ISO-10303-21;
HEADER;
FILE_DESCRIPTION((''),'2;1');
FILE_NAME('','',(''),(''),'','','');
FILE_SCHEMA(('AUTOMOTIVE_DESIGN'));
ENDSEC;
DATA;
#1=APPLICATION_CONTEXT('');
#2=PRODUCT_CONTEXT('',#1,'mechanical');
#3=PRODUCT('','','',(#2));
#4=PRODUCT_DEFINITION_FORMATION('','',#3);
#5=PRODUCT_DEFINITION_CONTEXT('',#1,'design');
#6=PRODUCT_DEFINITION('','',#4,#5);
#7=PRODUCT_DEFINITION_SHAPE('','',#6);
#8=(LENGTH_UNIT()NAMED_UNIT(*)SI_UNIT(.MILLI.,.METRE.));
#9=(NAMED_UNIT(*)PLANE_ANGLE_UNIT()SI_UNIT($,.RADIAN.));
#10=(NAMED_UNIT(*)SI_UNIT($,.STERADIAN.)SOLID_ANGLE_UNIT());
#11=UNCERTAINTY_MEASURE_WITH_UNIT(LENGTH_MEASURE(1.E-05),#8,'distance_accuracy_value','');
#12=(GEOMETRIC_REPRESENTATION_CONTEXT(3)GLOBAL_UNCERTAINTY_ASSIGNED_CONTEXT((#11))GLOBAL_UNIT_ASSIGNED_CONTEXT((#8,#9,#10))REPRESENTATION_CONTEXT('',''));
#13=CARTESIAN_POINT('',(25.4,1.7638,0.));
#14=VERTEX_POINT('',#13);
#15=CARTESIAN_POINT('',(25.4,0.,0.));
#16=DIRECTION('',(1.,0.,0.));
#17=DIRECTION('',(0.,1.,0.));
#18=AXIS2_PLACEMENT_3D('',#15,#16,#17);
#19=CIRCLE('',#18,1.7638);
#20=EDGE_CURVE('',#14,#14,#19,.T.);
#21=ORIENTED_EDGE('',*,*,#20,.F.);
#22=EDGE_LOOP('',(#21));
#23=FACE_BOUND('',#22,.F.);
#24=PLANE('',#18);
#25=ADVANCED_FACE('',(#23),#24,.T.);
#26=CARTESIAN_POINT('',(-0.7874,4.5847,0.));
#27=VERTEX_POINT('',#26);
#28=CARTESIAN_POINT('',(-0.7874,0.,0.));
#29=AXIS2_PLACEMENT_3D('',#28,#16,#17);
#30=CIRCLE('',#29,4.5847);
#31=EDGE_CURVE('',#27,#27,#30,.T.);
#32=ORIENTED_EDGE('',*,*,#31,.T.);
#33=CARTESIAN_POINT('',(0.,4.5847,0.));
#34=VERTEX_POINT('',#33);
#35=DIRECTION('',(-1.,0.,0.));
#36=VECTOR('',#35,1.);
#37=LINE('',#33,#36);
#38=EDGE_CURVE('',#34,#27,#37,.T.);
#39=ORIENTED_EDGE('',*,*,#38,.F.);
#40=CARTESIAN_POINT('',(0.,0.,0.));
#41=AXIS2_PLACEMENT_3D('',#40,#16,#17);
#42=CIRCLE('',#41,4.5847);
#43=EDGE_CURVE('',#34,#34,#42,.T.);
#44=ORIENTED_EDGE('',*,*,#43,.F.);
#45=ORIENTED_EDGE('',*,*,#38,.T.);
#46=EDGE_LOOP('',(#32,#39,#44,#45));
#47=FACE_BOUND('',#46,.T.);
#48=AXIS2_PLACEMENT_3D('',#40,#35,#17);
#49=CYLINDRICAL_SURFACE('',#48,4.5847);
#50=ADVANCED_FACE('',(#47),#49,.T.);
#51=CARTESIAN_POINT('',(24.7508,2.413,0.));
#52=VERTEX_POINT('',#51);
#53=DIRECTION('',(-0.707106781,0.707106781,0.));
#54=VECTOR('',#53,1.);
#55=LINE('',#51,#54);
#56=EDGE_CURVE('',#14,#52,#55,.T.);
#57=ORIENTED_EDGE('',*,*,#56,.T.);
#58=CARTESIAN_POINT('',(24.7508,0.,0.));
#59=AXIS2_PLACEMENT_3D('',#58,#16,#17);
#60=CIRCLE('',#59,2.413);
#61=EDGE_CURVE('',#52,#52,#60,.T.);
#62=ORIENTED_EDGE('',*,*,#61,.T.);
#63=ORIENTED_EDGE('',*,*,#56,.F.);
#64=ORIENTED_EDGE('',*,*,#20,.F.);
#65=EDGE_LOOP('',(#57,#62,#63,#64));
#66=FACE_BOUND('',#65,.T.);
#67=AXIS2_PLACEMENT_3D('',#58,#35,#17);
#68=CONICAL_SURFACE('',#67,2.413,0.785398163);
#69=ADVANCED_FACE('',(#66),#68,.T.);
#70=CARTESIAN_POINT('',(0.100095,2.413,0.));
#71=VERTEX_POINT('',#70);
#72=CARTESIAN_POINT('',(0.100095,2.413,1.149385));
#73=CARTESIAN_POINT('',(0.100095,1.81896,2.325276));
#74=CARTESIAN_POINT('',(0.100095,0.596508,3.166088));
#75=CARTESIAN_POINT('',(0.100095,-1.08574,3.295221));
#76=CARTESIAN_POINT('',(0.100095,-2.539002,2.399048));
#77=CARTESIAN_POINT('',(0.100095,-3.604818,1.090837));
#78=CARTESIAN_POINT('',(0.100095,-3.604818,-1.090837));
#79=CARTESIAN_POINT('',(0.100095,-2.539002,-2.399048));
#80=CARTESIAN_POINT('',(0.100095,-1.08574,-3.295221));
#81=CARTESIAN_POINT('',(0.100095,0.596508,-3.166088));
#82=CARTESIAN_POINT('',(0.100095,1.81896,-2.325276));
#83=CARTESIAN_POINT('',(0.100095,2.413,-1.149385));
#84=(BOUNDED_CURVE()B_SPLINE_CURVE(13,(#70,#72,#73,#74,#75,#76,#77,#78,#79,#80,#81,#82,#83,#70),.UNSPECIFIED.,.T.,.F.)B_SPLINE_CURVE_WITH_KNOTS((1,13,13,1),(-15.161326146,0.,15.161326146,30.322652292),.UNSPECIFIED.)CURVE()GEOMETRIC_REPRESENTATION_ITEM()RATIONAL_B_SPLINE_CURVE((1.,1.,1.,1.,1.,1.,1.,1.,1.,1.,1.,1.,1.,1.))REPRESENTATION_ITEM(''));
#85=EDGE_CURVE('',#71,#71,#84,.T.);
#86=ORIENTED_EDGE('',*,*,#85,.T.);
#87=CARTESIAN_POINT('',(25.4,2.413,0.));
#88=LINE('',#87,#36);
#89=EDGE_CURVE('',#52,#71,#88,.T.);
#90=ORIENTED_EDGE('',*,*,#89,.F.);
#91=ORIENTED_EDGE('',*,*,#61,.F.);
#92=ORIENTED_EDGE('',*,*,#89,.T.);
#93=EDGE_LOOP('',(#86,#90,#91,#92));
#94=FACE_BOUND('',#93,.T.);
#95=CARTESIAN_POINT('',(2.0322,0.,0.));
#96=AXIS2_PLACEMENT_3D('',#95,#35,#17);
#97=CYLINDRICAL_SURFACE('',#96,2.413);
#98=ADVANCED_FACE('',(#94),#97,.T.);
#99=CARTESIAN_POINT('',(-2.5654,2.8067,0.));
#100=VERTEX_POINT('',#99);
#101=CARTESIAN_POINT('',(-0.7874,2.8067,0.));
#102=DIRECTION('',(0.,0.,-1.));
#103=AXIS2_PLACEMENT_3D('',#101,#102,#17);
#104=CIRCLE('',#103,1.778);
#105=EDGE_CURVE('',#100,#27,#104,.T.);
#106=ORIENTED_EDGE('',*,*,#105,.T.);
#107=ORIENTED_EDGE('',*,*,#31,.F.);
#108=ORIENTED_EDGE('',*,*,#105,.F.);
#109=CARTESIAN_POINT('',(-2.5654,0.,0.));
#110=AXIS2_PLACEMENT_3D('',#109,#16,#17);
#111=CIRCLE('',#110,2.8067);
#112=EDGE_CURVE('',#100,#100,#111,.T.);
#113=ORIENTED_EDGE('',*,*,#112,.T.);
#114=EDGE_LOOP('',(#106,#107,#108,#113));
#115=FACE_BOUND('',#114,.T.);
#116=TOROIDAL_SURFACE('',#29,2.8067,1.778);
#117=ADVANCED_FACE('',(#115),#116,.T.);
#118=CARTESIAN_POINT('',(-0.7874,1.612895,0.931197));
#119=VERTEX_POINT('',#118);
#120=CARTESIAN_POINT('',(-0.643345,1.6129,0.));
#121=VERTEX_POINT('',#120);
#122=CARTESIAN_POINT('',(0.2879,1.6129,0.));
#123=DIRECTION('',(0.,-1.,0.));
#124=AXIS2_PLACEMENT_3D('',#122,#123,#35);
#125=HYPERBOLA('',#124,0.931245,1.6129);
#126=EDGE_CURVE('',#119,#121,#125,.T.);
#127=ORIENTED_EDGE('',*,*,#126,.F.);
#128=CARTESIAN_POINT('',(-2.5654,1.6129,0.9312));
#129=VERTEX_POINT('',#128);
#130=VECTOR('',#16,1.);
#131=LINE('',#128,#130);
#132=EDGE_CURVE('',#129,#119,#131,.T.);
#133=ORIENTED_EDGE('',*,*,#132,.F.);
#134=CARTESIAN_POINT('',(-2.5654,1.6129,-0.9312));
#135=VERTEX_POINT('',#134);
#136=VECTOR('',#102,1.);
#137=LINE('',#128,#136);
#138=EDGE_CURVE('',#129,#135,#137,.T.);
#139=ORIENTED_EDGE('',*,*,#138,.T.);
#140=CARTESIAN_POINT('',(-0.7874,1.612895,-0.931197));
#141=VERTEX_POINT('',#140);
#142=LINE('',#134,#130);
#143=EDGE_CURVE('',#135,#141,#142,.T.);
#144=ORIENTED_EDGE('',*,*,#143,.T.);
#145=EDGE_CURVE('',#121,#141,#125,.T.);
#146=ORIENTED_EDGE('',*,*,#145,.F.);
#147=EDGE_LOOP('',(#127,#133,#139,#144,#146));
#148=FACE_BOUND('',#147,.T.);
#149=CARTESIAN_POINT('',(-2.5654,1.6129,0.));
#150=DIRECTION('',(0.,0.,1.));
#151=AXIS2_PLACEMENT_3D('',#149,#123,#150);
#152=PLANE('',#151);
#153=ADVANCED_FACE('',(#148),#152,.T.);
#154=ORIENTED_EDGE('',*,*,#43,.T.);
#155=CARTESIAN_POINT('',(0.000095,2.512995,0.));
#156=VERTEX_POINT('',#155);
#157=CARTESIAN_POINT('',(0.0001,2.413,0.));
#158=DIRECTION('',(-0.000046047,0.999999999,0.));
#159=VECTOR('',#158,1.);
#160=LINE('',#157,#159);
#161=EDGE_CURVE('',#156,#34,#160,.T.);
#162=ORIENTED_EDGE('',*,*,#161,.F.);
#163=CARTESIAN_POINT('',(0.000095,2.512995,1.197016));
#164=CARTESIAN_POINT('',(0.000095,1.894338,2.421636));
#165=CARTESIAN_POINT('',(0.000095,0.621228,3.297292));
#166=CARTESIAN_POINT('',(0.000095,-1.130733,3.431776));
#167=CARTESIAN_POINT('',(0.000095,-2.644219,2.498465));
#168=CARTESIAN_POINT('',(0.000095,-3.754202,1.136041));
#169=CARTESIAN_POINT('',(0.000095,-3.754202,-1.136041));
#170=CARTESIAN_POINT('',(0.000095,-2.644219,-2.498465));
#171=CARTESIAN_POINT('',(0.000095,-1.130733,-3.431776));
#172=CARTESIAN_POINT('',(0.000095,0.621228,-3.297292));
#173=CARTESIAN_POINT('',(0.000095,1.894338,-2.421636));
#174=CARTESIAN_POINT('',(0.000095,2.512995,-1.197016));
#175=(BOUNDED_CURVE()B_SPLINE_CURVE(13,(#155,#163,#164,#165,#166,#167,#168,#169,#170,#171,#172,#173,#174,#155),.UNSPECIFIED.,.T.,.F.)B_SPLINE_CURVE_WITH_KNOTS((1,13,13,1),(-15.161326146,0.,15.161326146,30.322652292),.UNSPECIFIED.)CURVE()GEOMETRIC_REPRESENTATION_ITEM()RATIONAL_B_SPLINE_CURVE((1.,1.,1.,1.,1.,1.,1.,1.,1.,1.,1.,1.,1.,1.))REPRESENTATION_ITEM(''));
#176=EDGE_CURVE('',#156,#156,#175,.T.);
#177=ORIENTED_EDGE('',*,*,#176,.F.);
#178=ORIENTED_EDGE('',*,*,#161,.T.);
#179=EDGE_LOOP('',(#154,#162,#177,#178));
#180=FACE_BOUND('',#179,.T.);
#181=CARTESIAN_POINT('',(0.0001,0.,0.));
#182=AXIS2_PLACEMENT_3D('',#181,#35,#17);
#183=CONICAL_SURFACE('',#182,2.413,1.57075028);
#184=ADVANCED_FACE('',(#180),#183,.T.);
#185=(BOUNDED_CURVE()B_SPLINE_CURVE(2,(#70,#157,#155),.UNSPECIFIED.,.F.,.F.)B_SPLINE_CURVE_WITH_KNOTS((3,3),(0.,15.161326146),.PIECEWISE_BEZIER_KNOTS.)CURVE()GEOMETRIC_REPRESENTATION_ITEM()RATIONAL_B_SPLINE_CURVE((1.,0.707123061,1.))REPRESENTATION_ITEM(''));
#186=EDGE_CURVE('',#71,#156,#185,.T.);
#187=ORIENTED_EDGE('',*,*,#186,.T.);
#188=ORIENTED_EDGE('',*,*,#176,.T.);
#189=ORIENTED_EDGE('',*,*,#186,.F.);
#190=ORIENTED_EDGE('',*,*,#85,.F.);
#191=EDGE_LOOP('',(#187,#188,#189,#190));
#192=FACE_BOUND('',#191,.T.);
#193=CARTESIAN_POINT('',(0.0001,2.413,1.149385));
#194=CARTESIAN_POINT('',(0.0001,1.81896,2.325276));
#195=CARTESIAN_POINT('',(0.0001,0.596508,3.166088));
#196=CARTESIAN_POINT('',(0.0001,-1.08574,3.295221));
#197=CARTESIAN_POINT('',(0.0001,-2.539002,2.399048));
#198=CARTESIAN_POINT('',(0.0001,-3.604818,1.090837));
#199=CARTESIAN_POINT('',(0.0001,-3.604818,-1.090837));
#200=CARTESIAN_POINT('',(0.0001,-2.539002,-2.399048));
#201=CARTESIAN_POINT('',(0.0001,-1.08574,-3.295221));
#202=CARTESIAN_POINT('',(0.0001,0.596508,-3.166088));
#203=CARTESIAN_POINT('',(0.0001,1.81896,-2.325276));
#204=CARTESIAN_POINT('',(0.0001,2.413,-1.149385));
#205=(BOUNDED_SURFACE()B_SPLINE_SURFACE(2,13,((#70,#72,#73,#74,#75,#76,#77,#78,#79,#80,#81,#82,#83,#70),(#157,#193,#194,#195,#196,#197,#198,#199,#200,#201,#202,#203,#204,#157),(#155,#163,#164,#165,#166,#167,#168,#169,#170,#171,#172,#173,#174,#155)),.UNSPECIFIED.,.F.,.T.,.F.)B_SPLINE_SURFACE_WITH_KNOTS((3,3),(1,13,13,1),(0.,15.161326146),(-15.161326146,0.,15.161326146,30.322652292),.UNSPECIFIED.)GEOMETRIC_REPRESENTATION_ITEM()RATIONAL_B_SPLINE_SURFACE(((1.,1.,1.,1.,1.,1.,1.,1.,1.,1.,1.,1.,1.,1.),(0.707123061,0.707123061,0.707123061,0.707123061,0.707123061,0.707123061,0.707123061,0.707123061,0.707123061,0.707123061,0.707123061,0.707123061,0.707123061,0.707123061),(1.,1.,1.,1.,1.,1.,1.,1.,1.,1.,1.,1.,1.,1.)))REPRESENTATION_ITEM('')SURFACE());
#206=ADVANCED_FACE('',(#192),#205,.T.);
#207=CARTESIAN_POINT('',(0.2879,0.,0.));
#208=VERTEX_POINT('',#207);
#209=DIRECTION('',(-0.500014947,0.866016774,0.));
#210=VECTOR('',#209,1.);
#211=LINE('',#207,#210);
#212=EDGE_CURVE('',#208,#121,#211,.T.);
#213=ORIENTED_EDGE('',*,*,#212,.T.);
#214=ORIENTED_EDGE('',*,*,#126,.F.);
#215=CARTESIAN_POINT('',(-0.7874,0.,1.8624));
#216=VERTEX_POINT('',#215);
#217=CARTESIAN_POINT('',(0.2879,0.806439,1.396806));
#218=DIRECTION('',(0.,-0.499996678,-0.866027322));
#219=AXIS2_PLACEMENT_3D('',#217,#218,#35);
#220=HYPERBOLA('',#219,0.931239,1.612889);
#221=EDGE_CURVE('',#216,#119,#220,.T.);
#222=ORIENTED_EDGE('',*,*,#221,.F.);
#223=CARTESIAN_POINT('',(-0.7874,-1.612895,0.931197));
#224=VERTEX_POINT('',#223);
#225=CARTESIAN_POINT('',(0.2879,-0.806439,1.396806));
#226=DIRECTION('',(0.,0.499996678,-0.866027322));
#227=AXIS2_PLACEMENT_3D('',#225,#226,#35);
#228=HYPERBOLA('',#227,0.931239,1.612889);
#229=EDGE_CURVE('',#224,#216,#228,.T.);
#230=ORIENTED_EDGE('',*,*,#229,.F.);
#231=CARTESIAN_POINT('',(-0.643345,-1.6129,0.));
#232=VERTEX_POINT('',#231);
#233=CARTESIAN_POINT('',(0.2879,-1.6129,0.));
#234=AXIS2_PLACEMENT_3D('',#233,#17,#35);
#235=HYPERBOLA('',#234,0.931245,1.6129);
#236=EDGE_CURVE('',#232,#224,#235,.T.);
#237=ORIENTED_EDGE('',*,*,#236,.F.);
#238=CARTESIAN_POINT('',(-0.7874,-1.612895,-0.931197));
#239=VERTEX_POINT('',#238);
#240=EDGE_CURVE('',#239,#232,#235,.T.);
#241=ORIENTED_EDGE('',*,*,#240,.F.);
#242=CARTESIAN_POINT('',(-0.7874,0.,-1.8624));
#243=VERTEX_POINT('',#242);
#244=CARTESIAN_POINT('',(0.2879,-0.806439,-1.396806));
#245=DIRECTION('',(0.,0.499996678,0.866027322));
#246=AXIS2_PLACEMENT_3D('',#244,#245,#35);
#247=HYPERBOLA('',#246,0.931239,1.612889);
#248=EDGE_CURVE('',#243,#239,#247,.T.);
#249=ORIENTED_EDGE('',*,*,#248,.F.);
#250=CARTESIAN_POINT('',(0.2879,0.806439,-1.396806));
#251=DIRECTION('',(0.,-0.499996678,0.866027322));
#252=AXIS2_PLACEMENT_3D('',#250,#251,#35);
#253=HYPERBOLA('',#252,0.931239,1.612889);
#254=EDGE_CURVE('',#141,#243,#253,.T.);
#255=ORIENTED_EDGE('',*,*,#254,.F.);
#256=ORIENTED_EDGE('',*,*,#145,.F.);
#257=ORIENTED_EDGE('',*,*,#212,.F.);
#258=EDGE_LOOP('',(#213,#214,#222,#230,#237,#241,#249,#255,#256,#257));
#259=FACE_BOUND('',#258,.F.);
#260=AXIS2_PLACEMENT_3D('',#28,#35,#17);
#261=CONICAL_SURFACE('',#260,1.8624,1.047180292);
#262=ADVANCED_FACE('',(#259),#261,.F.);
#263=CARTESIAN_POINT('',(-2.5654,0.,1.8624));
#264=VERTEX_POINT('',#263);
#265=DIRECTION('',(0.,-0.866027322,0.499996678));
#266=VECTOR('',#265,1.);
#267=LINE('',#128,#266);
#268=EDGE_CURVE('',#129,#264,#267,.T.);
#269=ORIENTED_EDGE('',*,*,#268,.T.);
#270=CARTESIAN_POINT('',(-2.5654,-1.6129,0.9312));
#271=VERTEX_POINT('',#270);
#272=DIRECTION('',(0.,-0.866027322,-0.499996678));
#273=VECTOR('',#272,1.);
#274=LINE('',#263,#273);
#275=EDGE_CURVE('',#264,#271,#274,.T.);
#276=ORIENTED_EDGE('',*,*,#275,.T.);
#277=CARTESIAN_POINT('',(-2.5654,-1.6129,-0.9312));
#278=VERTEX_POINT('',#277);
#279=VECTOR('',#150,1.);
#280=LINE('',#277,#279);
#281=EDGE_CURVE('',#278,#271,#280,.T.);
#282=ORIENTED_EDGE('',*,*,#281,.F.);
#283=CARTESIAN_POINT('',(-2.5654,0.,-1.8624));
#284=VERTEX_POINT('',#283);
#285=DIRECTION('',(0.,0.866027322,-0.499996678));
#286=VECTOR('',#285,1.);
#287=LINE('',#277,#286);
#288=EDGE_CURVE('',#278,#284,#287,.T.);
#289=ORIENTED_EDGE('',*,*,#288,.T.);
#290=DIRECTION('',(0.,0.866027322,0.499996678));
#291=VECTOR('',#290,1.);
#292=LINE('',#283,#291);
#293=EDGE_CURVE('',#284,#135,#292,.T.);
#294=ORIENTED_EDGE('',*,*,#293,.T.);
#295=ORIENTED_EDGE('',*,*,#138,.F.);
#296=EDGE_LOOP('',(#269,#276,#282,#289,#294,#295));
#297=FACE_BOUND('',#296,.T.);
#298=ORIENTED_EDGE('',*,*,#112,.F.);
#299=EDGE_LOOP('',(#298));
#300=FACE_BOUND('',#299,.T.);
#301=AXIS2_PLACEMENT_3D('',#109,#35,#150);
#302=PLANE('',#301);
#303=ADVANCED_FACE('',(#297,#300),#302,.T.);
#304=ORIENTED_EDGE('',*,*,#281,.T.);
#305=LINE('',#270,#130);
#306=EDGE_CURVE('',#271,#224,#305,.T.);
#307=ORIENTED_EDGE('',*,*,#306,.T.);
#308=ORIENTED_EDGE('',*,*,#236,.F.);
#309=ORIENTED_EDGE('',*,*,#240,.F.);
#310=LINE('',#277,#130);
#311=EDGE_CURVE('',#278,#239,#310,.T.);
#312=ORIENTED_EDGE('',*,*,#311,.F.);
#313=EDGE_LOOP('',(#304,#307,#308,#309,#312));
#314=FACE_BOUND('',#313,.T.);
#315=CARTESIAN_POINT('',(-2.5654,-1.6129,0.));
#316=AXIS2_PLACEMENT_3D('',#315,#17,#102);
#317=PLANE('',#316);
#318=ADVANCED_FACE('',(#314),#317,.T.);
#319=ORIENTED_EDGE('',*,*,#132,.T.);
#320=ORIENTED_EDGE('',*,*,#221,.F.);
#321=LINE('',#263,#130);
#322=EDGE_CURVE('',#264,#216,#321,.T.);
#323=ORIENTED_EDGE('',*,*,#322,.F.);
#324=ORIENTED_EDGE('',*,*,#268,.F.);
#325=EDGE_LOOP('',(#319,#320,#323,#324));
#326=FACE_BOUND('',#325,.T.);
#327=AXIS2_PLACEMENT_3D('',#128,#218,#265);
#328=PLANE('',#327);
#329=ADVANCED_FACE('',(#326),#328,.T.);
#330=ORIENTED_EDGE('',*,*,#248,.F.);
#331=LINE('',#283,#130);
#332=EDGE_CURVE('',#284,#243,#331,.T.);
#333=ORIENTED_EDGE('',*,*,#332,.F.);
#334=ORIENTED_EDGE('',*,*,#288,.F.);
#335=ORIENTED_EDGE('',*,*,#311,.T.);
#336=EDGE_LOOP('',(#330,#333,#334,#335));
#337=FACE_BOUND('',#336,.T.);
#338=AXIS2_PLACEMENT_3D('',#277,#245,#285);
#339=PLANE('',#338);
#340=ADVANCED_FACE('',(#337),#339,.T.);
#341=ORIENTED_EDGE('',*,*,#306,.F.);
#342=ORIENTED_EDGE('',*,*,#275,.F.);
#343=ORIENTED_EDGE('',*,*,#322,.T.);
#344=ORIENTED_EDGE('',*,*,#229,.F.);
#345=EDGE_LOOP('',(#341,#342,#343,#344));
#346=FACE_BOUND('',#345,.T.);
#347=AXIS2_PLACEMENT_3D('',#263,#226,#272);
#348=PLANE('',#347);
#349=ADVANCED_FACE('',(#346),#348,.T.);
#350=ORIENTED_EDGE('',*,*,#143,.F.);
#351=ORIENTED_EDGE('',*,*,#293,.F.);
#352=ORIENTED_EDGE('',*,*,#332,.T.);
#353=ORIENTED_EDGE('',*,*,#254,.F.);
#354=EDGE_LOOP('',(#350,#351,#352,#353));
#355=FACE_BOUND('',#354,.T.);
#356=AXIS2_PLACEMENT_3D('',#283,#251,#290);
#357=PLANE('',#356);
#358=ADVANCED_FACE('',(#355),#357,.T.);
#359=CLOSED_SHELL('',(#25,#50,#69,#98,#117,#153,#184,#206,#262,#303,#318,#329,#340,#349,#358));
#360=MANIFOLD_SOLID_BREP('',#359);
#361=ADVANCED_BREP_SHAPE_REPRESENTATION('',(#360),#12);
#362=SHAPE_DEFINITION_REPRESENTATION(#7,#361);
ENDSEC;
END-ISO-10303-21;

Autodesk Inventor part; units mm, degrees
ref_plane "YZ Plane" through (0, 0, 0) normal (1, 0, 0) x (0, 1, 0)
ref_plane "XZ Plane" through (0, 0, 0) normal (0, 1, 0) x (-1, 0, 0)
sketch "Sketch1" plane through (0, 0, 0) normal (0, 0, 1) x (1, 0, 0)
  line L0 (0.2879, 0) -> (25.4, 0)
  line L1 (25.4, 0) -> (25.4, 2.413)
  line L2 (25.4, 2.413) -> (2.0322, 2.413)
  line L3 (2.0322, 2.413) -> (0.0001, 2.413)
  line L4 (0.0001, 2.413) -> (0, 2.413)
  line L5 (0, 2.413) -> (0, 4.5847)
  line L6 (0, 4.5847) -> (-2.5654, 4.5847)
  line L7 (-2.5654, 4.5847) -> (-2.5654, 1.8624)
  line L8 (-2.5654, 1.8624) -> (-0.7874, 1.8624)
  line L9 (-0.7874, 1.8624) -> (0.2879, 0)
  line L10 (-8.1585, 0) -> (30.9931, 0) projected
  line L11 (0, -0.9169) -> (0, 5.5016) projected
  line L12 (2.0322, 2.413) -> (0, 2.413) construction
  dimension "d1" = 23.3678
  dimension "d2" = 2.0321
  dimension "d3" = 2.5654
  dimension "d4" = 1.778
  dimension "d5" = 60
  dimension "d6" = 4.826
  dimension "d7" = 4.826
  dimension "d8" = 3.7248
  dimension "d9" = 9.1694
  dimension "d26" = 25.4
revolve "Body" add sketch "Sketch1" angle 360 about axis through (0.2879, 0, 0) along (1, 0, 0) contours L9 L11 L3 L2 L1 L0 | L9 L8 L7 L6 L5 L11
sketch "Sketch2" plane through (-2.5654, 0, 0) normal (-1, 0, 0) x (0, 0, 1)
  circle A0 centre (0, 0) radius 1.8624 projected
  line L0 (0, -6.4186) -> (0, 6.4186) projected
  line L1 (-6.4186, 0) -> (6.4186, 0) projected
  line L2 (1.8624, 0) -> (0.9312, -1.6129)
  line L3 (0.9312, -1.6129) -> (-0.9312, -1.6129)
  line L4 (-0.9312, -1.6129) -> (-1.8624, 0)
  line L5 (-1.8624, 0) -> (-0.9312, 1.6129)
  line L6 (-0.9312, 1.6129) -> (0.9312, 1.6129)
  line L7 (0.9312, 1.6129) -> (1.8624, 0)
extrude "Slot" add sketch "Sketch2" against normal up to next contours L7 A0 | A0 L2 | L6 L0 A0 | A0 L0 L3 | L0 L6 A0 | A0 L3 L0 | L4 A0 | A0 L5
fillet "Fillet1" radius 1.778 1 edges at (-2.5654, -4.5847, 0)
thread "Thread" size "10-24 UNC" class "2A" standard "ANSI Unified Screw Threads" length 23.3678
chamfer "Chamfer1" distance 0.6492 distance2 0.6492 1 edges at (25.4, -2.413, 0) measured on face at (25.4, 0.9527, 0.2826)
ref_plane "Work Plane1" through (29, 0, 0) normal (0, -1, 0) x (1, 0, 0)
fillet "Fillet2" radius 0.1 1 edges at (0.0001, -2.413, 0)
equation "\"d30\" = R"
equation "\"d17\" = RR"
equation "\"d13\" = GEL"
equation "\"d15\" = -0.5 * SPD + 0.5 * GD"
equation "\"d16\" = GUL"
equation "\"d1\" = GEL"
equation "\"d3\" = KOH"
equation "\"d4\" = INTI"
equation "\"d6\" = GD"
equation "\"d7\" = BDM"
equation "\"d8\" = 1.1547 * SW"
equation "\"d9\" = KOD"
equation "\"d26\" = NLG"
equation "\"GD\" = NND"
equation "\"NLG\" = 25.4"
equation "\"GEL\" = 23.3678"
equation "\"KOD\" = 9.1694"
equation "\"KOH\" = 2.5654"
equation "\"INTI\" = 1.778"
equation "\"GAL\" = 2.032"
equation "\"GUL\" = 0.64922"
equation "\"BDM\" = NND"
equation "\"SW\" = 3.2258"
equation "\"RR\" = 1.778"
equation "\"SPD\" = GD1"
equation "\"R\" = 0.1"
equation "\"KR\" = 5.4102"
equation "\"GD1\" = 3.52755"
equation "\"THREADDIA\" = 4.826"
equation "\"FAWI\" = 45deg"
equation "\"KOH1\" = 1.778"
equation "\"NND\" = 4.826"
equation "\"TOA\" = 30deg"
equation "\"E0\" = 1.155 * SW"
properties part number "Unbrako - 10 x 1" material "Steel, Mild"
